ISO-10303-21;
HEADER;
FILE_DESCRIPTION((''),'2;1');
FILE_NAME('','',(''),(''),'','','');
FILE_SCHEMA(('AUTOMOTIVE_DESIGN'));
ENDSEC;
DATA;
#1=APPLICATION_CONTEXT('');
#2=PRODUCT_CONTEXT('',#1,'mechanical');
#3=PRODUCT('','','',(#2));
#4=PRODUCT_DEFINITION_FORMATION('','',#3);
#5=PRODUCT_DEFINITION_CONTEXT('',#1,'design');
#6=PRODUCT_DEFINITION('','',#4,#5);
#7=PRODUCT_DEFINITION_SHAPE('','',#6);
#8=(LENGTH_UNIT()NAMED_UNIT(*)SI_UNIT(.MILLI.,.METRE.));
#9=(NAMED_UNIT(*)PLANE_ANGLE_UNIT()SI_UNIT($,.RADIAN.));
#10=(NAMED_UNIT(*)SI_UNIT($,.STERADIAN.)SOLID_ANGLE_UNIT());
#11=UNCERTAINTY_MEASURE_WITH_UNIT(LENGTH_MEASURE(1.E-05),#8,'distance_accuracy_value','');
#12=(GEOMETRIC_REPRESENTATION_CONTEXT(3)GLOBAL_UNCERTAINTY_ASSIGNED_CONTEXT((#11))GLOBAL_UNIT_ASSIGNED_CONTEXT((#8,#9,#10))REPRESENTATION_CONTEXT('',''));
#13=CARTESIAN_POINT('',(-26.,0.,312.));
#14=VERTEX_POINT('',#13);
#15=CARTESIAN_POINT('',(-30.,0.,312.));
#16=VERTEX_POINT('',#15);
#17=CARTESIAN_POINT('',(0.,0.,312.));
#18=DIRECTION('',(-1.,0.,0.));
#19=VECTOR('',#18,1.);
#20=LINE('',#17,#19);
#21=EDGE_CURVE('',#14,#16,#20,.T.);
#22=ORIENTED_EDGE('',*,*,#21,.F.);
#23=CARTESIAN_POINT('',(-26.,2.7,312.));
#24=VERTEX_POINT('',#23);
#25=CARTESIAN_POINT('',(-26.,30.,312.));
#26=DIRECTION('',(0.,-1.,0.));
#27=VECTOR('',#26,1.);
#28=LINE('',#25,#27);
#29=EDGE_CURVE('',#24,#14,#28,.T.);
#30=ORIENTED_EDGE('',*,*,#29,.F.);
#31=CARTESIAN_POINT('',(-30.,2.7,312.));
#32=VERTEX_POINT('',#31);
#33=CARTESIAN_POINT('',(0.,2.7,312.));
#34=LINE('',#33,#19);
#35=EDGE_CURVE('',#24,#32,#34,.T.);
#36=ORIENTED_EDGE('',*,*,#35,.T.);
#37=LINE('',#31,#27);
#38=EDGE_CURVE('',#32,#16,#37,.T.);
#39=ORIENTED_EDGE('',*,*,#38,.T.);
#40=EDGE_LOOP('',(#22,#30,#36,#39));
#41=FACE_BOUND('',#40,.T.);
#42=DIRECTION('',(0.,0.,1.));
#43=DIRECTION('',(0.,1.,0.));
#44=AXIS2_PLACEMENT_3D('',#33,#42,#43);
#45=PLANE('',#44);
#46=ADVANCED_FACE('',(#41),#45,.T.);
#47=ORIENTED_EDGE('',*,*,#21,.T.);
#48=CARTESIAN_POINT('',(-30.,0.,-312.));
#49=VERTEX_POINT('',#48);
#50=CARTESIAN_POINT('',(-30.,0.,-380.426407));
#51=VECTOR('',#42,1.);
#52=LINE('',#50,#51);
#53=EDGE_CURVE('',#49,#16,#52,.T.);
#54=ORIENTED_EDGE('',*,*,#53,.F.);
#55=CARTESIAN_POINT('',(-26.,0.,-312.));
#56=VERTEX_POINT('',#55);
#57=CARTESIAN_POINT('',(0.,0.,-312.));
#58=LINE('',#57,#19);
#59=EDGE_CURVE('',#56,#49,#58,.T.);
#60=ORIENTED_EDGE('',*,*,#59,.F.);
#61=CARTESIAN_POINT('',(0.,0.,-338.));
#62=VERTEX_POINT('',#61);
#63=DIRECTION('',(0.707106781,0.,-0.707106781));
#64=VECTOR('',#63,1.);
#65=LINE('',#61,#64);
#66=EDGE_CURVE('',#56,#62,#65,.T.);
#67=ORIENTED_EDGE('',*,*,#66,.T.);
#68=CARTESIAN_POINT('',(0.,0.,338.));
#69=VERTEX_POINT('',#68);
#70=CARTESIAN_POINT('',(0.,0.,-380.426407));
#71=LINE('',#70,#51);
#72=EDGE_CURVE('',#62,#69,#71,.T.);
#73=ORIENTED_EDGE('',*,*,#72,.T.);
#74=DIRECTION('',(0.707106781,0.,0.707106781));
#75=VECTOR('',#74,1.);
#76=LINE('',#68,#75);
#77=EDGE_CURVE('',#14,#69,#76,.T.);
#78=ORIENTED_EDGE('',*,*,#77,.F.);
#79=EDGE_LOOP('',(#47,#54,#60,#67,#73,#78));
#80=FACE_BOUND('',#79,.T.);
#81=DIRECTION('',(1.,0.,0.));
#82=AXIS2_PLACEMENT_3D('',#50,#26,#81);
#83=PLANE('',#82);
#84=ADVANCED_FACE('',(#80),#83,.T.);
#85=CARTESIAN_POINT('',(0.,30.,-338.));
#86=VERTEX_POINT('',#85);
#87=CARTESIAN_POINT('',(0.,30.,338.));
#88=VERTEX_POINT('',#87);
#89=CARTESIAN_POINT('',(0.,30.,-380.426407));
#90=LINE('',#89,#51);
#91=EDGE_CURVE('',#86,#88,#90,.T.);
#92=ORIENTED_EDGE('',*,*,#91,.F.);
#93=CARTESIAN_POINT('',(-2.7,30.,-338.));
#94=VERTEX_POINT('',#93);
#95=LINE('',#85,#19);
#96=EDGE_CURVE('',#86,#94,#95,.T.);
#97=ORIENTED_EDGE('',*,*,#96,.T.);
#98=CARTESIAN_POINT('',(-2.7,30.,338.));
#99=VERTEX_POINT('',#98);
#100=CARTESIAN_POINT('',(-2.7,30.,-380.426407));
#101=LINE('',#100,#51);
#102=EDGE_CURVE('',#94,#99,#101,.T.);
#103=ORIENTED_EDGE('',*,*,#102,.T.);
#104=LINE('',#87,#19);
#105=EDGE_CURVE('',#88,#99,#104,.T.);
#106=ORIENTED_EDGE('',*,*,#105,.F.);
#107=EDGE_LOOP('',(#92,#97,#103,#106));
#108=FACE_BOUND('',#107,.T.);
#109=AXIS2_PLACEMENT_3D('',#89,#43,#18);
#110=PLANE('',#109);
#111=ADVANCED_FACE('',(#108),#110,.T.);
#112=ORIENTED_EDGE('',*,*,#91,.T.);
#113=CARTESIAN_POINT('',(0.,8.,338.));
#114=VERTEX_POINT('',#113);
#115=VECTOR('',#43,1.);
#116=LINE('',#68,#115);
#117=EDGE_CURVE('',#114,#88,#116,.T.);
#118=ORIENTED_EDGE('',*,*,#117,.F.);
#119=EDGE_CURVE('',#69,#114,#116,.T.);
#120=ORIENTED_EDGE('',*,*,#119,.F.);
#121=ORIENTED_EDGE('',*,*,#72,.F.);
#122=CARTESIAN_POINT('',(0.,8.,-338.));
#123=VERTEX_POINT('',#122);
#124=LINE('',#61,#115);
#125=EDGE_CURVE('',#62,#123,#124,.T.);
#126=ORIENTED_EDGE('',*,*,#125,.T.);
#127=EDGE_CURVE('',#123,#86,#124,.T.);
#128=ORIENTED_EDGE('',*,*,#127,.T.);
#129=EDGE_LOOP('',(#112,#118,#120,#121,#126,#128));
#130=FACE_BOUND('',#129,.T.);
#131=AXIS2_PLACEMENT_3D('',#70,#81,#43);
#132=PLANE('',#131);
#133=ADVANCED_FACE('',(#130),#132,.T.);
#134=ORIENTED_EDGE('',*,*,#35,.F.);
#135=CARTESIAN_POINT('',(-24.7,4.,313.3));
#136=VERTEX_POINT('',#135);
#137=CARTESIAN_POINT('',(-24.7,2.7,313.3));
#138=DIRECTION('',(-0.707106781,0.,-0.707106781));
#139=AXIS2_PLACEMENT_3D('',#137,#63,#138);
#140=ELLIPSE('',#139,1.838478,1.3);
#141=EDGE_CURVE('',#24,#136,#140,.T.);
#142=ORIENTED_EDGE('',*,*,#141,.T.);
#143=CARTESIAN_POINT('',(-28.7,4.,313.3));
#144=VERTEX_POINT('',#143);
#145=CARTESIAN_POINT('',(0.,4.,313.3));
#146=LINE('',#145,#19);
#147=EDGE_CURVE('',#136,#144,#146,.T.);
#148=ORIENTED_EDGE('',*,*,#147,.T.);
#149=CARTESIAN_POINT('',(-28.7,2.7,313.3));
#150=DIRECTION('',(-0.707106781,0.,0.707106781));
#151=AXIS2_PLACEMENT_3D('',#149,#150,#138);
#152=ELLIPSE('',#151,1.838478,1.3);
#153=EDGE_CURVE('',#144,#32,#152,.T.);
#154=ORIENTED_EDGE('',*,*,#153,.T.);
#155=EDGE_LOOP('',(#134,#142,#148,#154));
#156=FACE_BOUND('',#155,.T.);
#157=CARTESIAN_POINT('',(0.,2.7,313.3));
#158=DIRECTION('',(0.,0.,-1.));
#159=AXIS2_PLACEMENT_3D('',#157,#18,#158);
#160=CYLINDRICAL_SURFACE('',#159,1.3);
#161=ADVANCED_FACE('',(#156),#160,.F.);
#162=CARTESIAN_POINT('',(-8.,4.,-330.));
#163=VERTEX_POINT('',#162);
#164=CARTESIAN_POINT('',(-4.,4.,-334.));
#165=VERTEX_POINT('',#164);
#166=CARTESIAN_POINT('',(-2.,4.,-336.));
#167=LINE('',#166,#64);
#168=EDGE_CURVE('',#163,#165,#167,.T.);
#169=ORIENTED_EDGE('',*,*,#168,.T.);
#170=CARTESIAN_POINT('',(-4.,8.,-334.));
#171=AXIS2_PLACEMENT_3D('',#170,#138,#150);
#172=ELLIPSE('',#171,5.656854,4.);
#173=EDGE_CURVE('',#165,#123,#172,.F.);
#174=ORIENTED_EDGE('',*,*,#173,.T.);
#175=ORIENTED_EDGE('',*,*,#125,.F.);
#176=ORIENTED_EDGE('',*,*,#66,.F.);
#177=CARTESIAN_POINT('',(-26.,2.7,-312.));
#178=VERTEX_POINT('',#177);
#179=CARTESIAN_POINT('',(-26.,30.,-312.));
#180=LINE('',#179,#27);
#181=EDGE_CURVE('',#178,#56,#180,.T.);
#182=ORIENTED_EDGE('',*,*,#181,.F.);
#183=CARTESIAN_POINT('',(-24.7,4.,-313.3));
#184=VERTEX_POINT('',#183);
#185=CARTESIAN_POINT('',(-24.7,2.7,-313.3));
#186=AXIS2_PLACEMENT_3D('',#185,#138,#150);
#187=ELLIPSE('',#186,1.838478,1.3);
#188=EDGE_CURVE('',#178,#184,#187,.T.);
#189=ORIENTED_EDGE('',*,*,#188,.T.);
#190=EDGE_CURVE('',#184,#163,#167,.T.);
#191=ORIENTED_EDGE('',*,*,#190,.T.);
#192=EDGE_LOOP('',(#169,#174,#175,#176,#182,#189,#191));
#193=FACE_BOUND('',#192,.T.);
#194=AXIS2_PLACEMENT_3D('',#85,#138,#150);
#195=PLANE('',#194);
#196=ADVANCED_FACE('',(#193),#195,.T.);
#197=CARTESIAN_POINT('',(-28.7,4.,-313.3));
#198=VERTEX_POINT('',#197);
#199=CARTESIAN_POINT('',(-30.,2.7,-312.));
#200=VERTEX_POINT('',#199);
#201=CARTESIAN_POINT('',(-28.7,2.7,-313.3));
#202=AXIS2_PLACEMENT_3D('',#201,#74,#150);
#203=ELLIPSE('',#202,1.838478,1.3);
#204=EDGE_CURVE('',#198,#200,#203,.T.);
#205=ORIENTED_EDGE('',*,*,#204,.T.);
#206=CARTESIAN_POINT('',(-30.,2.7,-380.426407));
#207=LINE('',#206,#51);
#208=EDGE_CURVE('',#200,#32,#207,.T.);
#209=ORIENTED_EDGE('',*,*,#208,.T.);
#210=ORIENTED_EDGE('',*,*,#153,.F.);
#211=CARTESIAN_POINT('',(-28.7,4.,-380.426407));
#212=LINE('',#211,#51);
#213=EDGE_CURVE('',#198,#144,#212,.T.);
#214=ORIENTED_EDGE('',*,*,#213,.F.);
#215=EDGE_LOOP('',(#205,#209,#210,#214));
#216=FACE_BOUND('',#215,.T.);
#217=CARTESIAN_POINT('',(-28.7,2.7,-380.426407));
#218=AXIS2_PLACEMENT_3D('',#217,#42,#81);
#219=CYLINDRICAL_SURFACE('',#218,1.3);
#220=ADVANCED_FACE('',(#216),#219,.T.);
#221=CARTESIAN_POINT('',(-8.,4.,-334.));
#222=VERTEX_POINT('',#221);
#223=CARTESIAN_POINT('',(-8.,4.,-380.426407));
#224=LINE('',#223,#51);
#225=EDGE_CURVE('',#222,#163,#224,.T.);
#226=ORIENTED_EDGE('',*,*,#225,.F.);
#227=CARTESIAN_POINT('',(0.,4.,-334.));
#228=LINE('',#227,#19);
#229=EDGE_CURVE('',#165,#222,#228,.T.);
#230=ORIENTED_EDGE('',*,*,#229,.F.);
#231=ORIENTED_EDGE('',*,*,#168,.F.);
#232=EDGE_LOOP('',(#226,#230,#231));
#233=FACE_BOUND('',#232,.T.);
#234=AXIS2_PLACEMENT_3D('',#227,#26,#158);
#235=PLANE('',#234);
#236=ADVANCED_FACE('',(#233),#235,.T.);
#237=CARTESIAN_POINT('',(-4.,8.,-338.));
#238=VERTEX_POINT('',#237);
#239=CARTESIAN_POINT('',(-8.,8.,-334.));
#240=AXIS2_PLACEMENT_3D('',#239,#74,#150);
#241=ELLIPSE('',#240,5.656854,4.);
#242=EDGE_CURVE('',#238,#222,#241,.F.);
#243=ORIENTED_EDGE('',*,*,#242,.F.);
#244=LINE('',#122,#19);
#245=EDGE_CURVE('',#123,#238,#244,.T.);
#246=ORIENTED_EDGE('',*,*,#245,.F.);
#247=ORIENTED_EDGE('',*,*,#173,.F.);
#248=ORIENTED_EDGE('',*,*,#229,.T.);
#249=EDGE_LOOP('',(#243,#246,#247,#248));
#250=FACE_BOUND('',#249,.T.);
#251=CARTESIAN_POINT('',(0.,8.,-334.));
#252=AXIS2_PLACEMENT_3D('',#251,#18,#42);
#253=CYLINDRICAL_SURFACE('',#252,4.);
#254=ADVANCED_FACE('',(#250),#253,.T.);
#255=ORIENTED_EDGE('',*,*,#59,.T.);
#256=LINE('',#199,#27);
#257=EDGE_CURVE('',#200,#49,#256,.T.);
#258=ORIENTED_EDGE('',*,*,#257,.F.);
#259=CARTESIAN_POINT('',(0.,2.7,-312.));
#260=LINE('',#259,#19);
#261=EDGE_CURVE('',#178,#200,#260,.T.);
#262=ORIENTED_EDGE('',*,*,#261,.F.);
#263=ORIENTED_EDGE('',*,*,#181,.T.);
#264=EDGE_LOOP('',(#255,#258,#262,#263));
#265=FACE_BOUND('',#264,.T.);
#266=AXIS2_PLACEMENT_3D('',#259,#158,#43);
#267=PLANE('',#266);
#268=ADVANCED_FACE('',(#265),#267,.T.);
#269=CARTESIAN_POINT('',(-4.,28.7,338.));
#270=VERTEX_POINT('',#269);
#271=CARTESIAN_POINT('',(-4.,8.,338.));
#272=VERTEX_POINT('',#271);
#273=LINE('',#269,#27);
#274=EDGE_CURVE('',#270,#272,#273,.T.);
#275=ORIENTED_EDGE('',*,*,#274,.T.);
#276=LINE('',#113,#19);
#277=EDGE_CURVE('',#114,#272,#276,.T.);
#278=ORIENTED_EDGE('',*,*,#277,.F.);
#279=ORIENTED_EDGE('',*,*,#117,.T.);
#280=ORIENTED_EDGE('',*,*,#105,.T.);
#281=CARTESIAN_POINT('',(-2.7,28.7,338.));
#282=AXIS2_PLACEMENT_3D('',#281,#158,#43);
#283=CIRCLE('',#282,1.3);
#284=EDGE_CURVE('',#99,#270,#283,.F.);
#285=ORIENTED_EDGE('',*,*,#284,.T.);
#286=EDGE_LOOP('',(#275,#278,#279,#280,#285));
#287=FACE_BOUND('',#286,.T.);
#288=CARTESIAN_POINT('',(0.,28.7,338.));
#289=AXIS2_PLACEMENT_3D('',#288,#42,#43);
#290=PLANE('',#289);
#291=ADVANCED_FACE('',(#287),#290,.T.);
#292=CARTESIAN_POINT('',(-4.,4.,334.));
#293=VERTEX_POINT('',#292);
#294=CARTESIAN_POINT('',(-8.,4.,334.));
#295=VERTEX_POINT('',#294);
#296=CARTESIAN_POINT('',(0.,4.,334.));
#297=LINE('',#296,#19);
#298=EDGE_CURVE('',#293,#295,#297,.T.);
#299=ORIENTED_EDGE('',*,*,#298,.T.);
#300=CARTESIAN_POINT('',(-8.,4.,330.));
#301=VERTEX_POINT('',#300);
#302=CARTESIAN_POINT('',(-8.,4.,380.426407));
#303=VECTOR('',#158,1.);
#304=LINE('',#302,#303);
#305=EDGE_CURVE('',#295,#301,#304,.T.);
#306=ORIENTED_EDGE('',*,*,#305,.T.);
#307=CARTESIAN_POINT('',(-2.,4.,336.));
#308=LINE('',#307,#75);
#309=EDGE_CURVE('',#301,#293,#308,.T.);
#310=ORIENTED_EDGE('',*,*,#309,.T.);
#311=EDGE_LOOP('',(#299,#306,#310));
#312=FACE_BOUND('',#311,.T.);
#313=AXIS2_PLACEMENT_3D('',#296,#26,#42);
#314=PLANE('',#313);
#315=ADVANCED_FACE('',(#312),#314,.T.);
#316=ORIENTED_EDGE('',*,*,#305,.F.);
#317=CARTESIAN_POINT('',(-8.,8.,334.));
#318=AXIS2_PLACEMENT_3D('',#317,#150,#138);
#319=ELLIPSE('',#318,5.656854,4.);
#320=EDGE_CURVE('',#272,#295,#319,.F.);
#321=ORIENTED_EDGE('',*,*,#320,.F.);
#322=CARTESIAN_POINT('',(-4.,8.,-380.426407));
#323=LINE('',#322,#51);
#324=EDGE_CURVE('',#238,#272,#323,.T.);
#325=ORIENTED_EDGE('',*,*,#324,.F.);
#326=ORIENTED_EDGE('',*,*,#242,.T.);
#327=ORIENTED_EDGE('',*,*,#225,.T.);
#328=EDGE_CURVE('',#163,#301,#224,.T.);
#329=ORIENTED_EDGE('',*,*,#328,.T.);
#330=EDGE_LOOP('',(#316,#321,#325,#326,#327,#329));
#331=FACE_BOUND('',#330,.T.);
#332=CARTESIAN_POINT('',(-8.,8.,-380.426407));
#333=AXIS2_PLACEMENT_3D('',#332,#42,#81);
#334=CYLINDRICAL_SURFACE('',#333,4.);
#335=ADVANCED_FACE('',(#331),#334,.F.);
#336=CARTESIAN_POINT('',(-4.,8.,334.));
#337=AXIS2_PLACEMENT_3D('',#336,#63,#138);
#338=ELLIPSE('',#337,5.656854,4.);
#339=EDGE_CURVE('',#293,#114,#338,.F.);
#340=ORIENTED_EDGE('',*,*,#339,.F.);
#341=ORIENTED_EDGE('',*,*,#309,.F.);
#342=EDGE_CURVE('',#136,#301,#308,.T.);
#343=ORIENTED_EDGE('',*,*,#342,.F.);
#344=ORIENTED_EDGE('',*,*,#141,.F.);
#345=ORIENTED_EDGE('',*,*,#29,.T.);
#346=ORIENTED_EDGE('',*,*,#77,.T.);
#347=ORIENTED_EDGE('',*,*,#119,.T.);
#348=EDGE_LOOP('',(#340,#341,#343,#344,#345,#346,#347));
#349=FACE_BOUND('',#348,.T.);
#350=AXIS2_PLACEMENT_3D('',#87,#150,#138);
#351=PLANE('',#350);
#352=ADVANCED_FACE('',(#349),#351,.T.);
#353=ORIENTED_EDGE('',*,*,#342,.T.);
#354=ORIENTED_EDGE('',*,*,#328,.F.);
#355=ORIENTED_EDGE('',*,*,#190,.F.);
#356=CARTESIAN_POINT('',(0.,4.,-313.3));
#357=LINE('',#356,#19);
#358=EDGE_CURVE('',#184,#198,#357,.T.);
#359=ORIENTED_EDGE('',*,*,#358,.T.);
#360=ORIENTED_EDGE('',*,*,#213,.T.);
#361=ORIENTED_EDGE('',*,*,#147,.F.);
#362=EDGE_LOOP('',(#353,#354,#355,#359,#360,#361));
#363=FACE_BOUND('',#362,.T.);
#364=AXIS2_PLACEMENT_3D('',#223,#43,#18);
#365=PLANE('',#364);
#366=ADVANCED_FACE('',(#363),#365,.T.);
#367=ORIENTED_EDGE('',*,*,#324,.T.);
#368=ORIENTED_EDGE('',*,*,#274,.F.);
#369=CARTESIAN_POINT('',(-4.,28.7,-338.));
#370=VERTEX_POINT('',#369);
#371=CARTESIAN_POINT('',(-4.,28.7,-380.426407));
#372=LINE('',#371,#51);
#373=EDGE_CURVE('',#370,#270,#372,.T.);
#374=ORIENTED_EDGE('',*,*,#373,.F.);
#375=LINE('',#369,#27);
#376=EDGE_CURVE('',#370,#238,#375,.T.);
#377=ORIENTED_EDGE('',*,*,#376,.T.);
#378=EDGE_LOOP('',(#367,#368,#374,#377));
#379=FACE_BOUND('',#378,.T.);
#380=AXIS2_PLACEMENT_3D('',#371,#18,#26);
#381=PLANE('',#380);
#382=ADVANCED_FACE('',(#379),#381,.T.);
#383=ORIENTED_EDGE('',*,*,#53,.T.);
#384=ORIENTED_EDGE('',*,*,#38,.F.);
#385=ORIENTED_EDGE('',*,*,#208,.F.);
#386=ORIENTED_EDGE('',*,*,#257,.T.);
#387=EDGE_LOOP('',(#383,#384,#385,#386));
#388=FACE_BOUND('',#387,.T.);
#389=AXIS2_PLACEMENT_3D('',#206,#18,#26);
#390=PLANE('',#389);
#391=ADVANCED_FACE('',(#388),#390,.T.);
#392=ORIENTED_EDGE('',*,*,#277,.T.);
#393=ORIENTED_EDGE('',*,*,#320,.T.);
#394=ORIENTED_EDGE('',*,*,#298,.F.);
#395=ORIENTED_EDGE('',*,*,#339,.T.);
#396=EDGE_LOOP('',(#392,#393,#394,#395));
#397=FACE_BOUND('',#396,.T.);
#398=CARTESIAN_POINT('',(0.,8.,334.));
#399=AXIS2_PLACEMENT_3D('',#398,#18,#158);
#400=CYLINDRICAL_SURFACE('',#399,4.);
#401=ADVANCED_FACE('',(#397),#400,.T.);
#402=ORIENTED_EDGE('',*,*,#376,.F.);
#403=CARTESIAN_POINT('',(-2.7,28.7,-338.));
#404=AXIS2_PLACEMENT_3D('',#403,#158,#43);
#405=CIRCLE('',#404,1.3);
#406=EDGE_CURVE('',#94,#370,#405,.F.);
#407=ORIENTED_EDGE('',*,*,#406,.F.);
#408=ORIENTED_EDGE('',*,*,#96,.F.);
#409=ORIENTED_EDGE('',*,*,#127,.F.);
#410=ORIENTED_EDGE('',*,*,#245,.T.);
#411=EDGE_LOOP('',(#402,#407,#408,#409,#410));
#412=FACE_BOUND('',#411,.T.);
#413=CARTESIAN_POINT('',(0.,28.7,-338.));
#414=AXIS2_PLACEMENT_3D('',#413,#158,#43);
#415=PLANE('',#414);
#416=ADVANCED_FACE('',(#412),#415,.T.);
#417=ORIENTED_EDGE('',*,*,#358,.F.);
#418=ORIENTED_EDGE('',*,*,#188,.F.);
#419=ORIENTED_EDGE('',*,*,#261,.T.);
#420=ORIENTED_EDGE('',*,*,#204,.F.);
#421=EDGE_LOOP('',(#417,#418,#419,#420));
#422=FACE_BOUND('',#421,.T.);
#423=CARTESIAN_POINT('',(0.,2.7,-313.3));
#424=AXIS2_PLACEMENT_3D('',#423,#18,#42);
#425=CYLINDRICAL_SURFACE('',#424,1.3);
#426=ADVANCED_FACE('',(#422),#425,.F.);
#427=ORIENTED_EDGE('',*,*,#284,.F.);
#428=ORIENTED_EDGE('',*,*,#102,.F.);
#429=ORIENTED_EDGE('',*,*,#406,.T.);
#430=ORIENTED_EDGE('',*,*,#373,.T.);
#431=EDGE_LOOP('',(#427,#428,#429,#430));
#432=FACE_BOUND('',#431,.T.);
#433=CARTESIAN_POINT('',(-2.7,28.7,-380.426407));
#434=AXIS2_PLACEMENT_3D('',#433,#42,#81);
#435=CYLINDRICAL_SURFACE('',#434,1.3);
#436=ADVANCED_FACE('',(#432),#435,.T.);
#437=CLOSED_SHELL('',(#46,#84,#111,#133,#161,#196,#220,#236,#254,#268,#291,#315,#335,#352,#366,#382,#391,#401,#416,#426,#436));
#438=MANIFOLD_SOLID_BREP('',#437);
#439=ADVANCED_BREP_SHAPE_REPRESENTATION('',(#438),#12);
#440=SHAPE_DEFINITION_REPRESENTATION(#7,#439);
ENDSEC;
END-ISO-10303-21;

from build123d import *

# Parameters (mm, degrees)
EXTRUDE_1_DEPTH = 338
OTHER_START     = -31
OTHER_1_DEPTH   = 5
OTHER_START_2   = -24.7
OTHER_1_2_DEPTH = 20.7
OTHER_START_3   = -1
OTHER_1_3_DEPTH = 5
OTHER_START_4   = 4
OTHER_1_4_DEPTH = 4
OTHER_START_5   = -4
OTHER_1_5_DEPTH = 4
OTHER_START_6   = -26
OTHER_1_6_DEPTH = 18


with BuildPart() as part:
    # Эскиз1 → Бобышка-Вытянуть1 (new body)
    with BuildSketch(Plane.XY):
        with BuildLine():
            Line((0, 0), (0, 30))
            Line((0, 30), (-2.7, 30))
            ThreePointArc((-2.7, 30), (-3.619238816, 29.619238816), (-4, 28.7))
            Line((-4, 28.7), (-4, 8))
            ThreePointArc((-4, 8), (-5.171572875, 5.171572875), (-8, 4))
            Line((-8, 4), (-28.7, 4))
            ThreePointArc((-28.7, 4), (-29.619238816, 3.619238816), (-30, 2.7))
            Line((-30, 2.7), (-30, 0))
            Line((-30, 0), (0, 0))
        make_face()
    extrude(amount=-EXTRUDE_1_DEPTH)

    # Полость1: read off the stored shape, not the designer's step
    # Полость1 outline → Полость1 (cut)
    with BuildSketch(Plane.YZ.offset(OTHER_START)):
        with BuildLine():
            Line((4, -338), (4, -313.3))
            ThreePointArc((4, -313.3), (3.619238816, -312.380761184), (2.7, -312))
            Line((2.7, -312), (0, -312))
            Line((0, -312), (0, -338))
            Line((0, -338), (4, -338))
        make_face()
    extrude(amount=OTHER_1_DEPTH, mode=Mode.SUBTRACT)

    # Other 1 2 outline → Other 1 2 (cut)
    with BuildSketch(Plane.YZ.offset(OTHER_START_2)):
        with BuildLine():
            ThreePointArc((8, -338), (5.171572875, -336.828427125), (4, -334))
            Line((4, -334), (4, -338))
            Line((4, -338), (8, -338))
        make_face()
    extrude(amount=OTHER_1_2_DEPTH, mode=Mode.SUBTRACT)

    # Other 1 3 outline → Other 1 3 (cut)
    with BuildSketch(Plane(origin=(0, 0, 0), x_dir=(1, 0, 0), z_dir=(0, 1, 0)).offset(OTHER_START_3)):
        Polygon((0, 338), (-26, 338), (-26, 312), align=None)
    extrude(amount=OTHER_1_3_DEPTH, mode=Mode.SUBTRACT)

    # Other 1 4 outline → Other 1 4 (cut)
    with BuildSketch(Plane(origin=(0, 0, 0), x_dir=(1, 0, 0), z_dir=(0, 1, 0)).offset(OTHER_START_4)):
        Polygon((-4, 334), (0, 338), (-4, 338), align=None)
    extrude(amount=OTHER_1_4_DEPTH, mode=Mode.SUBTRACT)

    # Other 1 5 outline → Other 1 5 (add)
    with BuildSketch(Plane.YZ.offset(OTHER_START_5)):
        with BuildLine():
            ThreePointArc((4, -334), (5.171572875, -336.828427125), (8, -338))
            Line((8, -338), (8, -311))
            Line((8, -311), (4.000000005, -311))
            Line((4.000000005, -311), (4, -334))
        make_face()
    extrude(amount=OTHER_1_5_DEPTH)

    # Other 1 6 outline → Other 1 6 (add)
    with BuildSketch(Plane.YZ.offset(OTHER_START_6)):
        with BuildLine():
            ThreePointArc((2.7, -312), (3.619238816, -312.380761184), (4, -313.3))
            Line((4, -313.3), (4.000000005, -311))
            Line((4.000000005, -311), (2, -311))
            Line((2, -311), (2, -312.000000001))
            Line((2, -312.000000001), (2.7, -312))
        make_face()
    extrude(amount=OTHER_1_6_DEPTH)

    # Зеркальное отражение1: part across plane


with BuildPart() as part_1:
    add(part.part)
    add(part.part.mirror(Plane(origin=(-2.7, 28.7, 0), x_dir=(1, 0, 0), z_dir=(0, 0, 1))))


solid = part_1.part
